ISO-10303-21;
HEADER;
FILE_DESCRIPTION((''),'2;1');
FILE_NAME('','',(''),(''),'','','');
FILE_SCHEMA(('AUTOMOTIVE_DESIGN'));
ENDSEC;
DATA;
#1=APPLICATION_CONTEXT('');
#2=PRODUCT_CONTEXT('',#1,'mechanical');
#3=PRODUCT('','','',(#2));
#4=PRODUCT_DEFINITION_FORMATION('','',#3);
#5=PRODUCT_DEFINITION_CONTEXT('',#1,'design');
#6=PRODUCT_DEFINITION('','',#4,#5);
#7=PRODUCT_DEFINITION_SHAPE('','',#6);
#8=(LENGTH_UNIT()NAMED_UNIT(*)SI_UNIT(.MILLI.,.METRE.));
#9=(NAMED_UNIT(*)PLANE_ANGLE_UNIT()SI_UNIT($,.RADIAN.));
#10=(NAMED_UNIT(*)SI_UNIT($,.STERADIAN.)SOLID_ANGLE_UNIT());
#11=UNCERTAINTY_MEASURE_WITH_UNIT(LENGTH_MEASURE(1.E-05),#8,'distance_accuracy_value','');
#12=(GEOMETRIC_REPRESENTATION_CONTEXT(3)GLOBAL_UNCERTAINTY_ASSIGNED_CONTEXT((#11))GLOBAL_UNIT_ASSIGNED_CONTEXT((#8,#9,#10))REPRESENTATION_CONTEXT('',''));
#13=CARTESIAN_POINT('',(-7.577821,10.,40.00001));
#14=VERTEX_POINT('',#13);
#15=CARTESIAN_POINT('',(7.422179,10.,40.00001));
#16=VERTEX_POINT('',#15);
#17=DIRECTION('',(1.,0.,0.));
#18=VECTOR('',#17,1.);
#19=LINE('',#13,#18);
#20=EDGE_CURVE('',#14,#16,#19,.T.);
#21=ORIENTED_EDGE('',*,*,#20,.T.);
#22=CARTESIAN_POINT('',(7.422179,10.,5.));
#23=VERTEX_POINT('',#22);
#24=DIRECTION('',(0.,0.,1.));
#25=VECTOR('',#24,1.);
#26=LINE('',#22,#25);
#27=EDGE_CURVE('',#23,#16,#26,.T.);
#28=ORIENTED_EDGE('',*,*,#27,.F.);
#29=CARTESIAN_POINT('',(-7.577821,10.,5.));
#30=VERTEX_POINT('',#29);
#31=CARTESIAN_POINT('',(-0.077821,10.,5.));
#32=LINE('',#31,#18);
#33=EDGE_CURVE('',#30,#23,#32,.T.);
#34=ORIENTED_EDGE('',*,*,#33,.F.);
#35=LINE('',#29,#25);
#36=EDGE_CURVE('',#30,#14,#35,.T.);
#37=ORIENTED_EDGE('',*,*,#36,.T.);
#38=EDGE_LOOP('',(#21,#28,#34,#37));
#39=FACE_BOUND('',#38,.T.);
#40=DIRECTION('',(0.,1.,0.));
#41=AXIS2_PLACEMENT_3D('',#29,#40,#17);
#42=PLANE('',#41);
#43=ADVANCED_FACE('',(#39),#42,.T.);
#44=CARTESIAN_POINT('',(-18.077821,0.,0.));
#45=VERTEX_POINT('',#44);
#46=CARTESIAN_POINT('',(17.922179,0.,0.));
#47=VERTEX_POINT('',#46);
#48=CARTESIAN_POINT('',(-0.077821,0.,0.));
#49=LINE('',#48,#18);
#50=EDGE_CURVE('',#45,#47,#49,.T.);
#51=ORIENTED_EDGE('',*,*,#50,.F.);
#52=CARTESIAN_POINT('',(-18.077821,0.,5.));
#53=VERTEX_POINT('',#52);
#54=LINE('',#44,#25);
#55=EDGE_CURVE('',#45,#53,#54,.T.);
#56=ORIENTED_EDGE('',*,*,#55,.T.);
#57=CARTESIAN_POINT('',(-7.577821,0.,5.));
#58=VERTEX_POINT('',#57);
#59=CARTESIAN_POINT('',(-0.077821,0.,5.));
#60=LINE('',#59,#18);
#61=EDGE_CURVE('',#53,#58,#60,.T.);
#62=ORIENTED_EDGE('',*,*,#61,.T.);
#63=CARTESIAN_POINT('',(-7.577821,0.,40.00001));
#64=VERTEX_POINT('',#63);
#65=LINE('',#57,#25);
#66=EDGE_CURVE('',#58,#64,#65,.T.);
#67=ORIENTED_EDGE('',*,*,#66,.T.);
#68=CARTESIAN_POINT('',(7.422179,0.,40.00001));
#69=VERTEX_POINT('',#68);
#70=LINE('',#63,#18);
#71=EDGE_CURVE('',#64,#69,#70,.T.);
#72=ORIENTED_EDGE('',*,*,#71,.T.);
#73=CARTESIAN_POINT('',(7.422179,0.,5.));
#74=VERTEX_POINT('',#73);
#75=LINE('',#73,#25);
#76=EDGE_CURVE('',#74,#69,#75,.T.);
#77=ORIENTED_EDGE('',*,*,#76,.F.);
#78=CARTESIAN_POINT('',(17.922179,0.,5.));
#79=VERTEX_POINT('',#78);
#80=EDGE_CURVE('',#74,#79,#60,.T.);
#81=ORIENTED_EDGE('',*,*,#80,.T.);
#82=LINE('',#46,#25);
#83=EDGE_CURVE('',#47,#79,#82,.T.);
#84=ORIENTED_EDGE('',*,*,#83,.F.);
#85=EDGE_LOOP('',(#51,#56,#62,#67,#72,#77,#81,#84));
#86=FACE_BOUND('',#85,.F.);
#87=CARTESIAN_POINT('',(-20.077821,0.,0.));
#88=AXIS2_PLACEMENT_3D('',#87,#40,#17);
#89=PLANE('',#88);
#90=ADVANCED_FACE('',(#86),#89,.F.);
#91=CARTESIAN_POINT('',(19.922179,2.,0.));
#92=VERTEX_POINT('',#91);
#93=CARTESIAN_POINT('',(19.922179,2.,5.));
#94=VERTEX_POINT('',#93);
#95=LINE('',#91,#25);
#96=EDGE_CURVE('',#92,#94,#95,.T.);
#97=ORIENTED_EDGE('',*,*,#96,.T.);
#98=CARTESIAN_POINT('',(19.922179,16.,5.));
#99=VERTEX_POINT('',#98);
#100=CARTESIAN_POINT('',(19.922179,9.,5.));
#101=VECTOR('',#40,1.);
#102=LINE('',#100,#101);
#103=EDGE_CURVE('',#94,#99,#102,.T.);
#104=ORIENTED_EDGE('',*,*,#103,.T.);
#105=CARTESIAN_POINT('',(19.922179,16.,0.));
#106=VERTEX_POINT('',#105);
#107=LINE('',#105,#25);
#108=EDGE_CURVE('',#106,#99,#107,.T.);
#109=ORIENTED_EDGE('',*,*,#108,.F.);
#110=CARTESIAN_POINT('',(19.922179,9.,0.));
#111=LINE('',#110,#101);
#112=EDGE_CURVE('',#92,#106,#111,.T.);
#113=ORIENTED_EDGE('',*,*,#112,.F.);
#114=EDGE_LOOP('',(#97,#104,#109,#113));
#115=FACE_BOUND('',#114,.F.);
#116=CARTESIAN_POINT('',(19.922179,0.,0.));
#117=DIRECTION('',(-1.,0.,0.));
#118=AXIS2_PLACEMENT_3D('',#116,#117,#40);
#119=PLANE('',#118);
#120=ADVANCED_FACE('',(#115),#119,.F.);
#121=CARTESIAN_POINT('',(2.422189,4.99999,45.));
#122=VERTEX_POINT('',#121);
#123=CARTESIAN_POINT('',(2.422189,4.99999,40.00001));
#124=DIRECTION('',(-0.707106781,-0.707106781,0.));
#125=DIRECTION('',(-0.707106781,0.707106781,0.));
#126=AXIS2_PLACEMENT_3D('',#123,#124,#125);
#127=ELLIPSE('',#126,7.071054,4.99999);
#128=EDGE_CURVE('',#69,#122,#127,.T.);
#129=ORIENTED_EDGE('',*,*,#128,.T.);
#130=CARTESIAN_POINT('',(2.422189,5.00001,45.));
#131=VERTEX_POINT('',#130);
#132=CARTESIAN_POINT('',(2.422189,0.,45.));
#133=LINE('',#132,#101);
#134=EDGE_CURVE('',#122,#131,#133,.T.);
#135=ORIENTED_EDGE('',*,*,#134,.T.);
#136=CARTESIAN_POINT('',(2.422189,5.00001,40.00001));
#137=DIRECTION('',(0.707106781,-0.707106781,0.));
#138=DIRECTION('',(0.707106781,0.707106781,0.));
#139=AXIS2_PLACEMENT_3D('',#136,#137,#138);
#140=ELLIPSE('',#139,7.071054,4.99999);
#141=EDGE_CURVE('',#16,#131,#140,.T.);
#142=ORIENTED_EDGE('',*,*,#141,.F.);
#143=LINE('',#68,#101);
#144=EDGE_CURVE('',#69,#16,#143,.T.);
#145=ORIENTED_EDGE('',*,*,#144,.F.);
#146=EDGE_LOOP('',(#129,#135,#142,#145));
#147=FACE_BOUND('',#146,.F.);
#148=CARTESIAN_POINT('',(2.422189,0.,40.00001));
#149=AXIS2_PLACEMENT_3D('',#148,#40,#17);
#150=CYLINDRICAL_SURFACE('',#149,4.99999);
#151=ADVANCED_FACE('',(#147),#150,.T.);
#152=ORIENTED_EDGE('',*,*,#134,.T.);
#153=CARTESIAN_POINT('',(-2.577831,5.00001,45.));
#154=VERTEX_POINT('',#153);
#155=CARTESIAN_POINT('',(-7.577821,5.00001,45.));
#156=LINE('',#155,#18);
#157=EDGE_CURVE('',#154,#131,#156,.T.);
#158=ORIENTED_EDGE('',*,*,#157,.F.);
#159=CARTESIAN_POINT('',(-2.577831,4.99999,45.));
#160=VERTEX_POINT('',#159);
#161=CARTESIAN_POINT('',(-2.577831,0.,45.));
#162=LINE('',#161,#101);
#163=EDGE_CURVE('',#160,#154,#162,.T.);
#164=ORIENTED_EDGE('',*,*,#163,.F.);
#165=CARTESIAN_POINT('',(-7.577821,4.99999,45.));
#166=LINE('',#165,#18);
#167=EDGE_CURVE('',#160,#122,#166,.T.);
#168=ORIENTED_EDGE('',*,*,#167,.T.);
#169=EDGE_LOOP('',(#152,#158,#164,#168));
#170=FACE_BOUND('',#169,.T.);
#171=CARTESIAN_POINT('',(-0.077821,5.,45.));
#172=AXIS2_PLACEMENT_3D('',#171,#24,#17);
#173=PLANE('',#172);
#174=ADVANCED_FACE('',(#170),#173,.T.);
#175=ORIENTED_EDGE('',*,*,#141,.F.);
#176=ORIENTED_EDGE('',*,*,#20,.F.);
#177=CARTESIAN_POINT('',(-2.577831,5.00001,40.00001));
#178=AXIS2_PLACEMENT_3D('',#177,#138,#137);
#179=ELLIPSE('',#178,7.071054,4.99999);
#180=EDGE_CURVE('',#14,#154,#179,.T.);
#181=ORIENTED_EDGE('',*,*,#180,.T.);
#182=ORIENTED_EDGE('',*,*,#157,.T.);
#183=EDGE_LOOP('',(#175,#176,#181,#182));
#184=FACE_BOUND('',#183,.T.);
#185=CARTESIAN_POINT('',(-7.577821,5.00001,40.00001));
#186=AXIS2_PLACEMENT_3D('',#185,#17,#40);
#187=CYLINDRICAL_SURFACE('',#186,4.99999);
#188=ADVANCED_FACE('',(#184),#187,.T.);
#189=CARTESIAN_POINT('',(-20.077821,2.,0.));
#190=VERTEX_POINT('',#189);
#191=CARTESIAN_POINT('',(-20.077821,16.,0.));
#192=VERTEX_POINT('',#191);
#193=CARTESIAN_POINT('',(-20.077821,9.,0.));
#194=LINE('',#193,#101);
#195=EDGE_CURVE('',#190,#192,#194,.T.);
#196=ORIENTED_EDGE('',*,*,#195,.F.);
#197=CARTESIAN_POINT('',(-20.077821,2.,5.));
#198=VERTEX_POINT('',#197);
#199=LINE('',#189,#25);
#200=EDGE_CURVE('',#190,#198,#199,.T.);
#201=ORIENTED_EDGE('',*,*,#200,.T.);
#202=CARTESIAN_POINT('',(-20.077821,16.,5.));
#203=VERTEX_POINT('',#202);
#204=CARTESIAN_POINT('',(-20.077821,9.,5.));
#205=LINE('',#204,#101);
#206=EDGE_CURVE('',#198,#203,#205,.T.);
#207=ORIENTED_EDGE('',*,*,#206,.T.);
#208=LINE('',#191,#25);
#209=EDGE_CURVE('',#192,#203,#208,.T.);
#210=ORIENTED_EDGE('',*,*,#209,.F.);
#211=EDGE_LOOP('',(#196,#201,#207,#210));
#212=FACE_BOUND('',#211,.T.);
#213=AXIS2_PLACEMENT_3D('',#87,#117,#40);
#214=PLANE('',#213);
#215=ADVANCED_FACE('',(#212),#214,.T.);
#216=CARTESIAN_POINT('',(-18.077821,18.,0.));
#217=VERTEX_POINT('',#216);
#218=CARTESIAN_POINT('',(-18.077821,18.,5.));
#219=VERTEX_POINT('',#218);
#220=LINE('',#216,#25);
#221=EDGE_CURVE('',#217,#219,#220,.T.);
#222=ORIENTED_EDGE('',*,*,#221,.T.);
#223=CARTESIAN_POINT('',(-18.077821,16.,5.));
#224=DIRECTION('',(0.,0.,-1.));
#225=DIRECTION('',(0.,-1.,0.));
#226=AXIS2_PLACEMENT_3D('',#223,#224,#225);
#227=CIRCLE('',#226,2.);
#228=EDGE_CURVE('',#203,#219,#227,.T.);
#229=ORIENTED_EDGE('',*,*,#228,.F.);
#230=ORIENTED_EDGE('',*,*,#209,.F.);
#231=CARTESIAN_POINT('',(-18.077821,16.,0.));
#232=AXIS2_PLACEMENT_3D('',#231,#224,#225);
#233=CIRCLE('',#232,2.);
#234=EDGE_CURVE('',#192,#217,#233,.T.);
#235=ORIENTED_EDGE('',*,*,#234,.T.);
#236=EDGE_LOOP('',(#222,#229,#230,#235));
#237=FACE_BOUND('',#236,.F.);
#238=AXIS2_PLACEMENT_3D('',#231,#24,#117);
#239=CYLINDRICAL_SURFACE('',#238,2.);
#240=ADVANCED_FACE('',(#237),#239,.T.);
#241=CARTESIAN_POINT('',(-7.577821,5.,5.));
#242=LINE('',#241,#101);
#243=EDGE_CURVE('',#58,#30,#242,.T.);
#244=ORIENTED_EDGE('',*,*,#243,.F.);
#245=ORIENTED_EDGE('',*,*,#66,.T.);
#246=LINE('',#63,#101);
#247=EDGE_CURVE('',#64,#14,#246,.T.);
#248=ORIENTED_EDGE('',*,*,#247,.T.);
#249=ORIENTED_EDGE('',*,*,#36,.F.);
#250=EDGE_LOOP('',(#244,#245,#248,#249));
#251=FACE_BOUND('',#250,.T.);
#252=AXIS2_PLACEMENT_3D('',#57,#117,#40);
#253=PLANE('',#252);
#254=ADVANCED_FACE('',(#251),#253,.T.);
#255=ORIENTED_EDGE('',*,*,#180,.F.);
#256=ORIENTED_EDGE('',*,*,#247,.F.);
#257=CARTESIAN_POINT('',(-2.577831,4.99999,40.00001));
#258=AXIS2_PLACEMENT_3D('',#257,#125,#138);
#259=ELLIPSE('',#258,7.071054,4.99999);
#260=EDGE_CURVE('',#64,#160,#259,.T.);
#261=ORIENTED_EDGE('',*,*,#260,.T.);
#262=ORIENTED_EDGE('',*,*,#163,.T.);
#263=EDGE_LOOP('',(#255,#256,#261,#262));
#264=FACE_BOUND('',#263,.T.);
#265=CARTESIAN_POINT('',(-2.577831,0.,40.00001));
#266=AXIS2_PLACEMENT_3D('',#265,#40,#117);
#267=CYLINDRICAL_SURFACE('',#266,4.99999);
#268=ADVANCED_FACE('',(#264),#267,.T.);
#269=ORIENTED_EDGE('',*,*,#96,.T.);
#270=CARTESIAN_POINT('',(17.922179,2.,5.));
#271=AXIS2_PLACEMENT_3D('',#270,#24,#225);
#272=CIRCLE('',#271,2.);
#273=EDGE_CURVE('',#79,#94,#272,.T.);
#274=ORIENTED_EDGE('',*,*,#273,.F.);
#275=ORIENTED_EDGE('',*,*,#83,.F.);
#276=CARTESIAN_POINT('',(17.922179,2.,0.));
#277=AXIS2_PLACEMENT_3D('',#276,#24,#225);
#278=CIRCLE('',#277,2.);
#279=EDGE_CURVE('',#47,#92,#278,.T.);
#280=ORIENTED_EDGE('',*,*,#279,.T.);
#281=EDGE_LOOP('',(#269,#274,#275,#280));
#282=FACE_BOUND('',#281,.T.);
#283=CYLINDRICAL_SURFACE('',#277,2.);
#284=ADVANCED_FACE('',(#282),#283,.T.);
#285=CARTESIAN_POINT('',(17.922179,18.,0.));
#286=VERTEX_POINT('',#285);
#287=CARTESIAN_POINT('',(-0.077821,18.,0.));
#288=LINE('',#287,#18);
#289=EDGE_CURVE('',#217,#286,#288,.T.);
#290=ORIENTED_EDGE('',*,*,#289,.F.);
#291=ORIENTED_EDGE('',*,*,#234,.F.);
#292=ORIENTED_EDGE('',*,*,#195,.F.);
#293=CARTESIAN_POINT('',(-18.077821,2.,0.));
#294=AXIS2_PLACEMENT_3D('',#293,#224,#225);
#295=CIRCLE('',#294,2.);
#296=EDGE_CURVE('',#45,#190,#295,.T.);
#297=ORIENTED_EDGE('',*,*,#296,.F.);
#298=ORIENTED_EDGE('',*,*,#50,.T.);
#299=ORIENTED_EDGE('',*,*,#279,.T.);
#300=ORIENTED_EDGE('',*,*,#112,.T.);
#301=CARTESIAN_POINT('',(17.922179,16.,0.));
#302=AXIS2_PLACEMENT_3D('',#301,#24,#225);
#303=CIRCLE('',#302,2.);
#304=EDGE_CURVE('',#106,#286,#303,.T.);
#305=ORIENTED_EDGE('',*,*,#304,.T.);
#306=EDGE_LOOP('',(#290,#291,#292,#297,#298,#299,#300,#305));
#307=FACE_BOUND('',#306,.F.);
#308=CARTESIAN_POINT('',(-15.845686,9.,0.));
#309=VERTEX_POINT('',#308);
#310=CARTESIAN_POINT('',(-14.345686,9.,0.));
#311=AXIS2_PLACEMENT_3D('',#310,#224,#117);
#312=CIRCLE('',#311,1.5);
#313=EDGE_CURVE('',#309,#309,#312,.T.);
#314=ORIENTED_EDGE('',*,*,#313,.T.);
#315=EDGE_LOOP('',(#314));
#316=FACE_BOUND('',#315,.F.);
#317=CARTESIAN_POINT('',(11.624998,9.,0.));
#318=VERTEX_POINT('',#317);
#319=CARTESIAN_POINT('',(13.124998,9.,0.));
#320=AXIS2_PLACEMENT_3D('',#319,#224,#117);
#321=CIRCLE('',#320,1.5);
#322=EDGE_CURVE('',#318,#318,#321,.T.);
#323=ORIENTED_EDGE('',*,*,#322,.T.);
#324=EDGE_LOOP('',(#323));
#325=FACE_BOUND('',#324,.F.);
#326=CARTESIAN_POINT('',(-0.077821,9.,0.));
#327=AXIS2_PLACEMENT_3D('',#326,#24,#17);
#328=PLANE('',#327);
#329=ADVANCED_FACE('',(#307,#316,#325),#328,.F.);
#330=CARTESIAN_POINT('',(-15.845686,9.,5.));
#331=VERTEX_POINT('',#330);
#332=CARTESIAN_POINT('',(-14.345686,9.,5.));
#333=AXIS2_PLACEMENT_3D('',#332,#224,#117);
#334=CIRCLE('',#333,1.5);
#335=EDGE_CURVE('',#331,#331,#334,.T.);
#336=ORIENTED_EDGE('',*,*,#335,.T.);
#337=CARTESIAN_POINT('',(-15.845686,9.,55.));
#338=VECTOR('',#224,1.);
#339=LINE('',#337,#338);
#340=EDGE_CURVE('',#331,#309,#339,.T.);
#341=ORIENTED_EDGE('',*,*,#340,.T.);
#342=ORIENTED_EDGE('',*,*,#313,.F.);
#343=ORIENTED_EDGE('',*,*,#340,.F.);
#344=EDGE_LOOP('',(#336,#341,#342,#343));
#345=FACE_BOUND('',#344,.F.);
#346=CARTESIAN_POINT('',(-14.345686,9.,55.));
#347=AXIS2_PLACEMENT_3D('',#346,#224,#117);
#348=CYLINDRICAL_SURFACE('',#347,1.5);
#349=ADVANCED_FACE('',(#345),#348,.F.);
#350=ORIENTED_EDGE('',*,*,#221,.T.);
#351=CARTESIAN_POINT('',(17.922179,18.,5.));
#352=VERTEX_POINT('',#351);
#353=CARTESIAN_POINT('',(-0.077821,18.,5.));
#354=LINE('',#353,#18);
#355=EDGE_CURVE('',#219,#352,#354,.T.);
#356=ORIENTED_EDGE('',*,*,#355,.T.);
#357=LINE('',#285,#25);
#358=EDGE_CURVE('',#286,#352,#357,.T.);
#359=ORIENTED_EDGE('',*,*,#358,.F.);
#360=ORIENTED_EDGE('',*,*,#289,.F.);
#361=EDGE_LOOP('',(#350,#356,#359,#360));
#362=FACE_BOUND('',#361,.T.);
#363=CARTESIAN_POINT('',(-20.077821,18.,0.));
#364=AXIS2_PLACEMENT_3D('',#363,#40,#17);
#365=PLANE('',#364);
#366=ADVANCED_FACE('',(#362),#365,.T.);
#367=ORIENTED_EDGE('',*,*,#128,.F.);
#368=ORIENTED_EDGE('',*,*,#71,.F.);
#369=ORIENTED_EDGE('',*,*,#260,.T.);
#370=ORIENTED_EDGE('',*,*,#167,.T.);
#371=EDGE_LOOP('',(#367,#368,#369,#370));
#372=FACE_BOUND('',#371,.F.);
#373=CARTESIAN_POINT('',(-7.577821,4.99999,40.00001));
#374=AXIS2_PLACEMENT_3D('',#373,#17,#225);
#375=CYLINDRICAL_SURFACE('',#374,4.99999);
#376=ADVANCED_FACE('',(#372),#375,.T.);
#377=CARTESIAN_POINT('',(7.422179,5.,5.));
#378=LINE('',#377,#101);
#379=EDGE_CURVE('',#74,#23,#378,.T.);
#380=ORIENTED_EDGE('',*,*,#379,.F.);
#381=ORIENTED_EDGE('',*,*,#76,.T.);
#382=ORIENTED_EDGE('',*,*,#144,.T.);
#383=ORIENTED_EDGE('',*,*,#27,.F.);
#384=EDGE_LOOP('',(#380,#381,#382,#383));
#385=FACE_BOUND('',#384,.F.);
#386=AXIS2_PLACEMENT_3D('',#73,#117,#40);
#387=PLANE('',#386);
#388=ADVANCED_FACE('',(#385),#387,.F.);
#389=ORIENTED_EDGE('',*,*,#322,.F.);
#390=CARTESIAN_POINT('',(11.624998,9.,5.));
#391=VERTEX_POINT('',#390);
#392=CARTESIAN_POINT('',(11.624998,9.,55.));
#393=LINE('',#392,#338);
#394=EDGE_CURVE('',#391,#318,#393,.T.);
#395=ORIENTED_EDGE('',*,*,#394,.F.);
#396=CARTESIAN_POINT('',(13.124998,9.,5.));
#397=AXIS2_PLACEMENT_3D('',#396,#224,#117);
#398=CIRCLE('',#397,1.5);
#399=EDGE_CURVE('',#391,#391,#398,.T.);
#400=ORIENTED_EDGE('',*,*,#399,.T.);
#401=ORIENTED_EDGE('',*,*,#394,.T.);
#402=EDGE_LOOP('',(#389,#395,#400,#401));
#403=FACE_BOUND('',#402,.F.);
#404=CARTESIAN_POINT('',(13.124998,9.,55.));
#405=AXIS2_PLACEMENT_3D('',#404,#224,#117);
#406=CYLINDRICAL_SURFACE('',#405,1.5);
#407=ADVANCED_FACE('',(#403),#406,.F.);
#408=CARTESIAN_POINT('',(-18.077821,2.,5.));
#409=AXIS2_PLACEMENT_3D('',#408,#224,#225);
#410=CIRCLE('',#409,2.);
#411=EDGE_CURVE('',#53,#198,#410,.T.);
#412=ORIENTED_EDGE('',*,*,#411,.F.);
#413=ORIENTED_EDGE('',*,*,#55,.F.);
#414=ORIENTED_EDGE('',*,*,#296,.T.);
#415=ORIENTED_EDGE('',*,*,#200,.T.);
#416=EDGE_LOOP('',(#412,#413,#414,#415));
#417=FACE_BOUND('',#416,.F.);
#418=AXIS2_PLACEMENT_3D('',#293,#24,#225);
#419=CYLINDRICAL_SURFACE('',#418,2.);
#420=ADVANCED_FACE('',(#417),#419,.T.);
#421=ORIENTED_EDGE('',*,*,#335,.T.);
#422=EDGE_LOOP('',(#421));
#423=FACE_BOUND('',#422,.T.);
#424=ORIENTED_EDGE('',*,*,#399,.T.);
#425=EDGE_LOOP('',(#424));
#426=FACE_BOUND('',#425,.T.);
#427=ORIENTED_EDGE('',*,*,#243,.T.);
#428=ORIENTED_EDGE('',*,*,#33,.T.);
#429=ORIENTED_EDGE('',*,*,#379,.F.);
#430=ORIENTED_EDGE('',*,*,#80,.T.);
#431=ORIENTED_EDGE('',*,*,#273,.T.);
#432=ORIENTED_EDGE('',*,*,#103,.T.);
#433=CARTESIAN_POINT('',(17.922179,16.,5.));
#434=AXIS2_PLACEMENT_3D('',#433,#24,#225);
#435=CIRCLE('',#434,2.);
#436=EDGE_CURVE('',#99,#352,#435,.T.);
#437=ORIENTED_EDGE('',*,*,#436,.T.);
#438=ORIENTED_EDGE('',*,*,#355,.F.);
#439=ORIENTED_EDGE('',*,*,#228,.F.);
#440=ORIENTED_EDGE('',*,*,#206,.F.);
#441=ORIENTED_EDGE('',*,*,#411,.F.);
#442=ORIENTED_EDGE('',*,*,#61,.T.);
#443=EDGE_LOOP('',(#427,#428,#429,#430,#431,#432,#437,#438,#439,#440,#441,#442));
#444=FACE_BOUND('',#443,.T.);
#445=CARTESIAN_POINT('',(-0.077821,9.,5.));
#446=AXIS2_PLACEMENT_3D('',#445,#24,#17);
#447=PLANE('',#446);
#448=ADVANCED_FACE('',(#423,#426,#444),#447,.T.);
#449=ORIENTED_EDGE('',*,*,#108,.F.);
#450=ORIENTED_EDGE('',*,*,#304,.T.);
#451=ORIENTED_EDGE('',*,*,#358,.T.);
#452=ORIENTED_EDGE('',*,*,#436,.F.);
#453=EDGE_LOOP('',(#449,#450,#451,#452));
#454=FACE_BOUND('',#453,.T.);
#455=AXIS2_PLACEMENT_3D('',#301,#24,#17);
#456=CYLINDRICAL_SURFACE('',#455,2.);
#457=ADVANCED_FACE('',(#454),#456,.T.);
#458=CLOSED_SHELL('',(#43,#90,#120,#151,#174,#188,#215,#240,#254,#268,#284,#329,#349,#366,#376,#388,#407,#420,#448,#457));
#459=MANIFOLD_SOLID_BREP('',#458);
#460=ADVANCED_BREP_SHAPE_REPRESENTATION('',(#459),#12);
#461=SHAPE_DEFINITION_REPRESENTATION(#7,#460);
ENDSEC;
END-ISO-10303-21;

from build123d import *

# Parameters (mm, degrees)
F0_W     = 40
F0_H     = 18
F1_DEPTH = 5
F2_W     = 15
F2_H     = 10
F3_DEPTH = 40
F4_R     = 4.99999
F5_D     = 3
F5_DEPTH = 50
F5_TIP   = 0.9012909285
F6_R     = 2


# Not quite as in the source:
# - a fillet or chamfer is up to 0.001 mm smaller than in the source, because OpenCascade refuses the exact size


with BuildPart() as f1:
    # F0 (on Top) → F1 (new body)
    with BuildSketch(Plane.XY):
        with Locations((-0.0778210488, 9)):
            Rectangle(F0_W, F0_H)
    extrude(amount=F1_DEPTH)

    # F2 (on face) → F3 (join)
    with BuildSketch(Plane.XY.offset(5)):
        with Locations((-0.0778210488, 5)):
            Rectangle(F2_W, F2_H)
    extrude(amount=F3_DEPTH)

    # F4 (radius 5 in the source; OpenCascade refuses exactly that, so slightly less here)
    f4_edges = [f1.edges().sort_by_distance(p)[0] for p in [
        (7.422179, 5, 45),
        (-0.077821, 10, 45),
        (-7.577821, 5, 45),
        (-0.077821, 0, 45),
    ]]
    fillet(f4_edges, radius=F4_R)

    # F5
    with Locations(Plane.XY.offset(5)):
        with Locations((-14.3456859514, 9), (13.1249977276, 9)):
            Hole(F5_D / 2, depth=F5_DEPTH)
            with Locations((0, 0, -(F5_DEPTH + F5_TIP / 2))):  # 118° drill point
                Cone(0, F5_D / 2, F5_TIP, mode=Mode.SUBTRACT)

    # F6
    f6_edges = [f1.edges().sort_by_distance(p)[0] for p in [
        (-20.077821, 0, 2.5),
        (-20.077821, 18, 2.5),
        (19.922179, 18, 2.5),
        (19.922179, 0, 2.5),
    ]]
    fillet(f6_edges, radius=F6_R)


solid = f1.part
